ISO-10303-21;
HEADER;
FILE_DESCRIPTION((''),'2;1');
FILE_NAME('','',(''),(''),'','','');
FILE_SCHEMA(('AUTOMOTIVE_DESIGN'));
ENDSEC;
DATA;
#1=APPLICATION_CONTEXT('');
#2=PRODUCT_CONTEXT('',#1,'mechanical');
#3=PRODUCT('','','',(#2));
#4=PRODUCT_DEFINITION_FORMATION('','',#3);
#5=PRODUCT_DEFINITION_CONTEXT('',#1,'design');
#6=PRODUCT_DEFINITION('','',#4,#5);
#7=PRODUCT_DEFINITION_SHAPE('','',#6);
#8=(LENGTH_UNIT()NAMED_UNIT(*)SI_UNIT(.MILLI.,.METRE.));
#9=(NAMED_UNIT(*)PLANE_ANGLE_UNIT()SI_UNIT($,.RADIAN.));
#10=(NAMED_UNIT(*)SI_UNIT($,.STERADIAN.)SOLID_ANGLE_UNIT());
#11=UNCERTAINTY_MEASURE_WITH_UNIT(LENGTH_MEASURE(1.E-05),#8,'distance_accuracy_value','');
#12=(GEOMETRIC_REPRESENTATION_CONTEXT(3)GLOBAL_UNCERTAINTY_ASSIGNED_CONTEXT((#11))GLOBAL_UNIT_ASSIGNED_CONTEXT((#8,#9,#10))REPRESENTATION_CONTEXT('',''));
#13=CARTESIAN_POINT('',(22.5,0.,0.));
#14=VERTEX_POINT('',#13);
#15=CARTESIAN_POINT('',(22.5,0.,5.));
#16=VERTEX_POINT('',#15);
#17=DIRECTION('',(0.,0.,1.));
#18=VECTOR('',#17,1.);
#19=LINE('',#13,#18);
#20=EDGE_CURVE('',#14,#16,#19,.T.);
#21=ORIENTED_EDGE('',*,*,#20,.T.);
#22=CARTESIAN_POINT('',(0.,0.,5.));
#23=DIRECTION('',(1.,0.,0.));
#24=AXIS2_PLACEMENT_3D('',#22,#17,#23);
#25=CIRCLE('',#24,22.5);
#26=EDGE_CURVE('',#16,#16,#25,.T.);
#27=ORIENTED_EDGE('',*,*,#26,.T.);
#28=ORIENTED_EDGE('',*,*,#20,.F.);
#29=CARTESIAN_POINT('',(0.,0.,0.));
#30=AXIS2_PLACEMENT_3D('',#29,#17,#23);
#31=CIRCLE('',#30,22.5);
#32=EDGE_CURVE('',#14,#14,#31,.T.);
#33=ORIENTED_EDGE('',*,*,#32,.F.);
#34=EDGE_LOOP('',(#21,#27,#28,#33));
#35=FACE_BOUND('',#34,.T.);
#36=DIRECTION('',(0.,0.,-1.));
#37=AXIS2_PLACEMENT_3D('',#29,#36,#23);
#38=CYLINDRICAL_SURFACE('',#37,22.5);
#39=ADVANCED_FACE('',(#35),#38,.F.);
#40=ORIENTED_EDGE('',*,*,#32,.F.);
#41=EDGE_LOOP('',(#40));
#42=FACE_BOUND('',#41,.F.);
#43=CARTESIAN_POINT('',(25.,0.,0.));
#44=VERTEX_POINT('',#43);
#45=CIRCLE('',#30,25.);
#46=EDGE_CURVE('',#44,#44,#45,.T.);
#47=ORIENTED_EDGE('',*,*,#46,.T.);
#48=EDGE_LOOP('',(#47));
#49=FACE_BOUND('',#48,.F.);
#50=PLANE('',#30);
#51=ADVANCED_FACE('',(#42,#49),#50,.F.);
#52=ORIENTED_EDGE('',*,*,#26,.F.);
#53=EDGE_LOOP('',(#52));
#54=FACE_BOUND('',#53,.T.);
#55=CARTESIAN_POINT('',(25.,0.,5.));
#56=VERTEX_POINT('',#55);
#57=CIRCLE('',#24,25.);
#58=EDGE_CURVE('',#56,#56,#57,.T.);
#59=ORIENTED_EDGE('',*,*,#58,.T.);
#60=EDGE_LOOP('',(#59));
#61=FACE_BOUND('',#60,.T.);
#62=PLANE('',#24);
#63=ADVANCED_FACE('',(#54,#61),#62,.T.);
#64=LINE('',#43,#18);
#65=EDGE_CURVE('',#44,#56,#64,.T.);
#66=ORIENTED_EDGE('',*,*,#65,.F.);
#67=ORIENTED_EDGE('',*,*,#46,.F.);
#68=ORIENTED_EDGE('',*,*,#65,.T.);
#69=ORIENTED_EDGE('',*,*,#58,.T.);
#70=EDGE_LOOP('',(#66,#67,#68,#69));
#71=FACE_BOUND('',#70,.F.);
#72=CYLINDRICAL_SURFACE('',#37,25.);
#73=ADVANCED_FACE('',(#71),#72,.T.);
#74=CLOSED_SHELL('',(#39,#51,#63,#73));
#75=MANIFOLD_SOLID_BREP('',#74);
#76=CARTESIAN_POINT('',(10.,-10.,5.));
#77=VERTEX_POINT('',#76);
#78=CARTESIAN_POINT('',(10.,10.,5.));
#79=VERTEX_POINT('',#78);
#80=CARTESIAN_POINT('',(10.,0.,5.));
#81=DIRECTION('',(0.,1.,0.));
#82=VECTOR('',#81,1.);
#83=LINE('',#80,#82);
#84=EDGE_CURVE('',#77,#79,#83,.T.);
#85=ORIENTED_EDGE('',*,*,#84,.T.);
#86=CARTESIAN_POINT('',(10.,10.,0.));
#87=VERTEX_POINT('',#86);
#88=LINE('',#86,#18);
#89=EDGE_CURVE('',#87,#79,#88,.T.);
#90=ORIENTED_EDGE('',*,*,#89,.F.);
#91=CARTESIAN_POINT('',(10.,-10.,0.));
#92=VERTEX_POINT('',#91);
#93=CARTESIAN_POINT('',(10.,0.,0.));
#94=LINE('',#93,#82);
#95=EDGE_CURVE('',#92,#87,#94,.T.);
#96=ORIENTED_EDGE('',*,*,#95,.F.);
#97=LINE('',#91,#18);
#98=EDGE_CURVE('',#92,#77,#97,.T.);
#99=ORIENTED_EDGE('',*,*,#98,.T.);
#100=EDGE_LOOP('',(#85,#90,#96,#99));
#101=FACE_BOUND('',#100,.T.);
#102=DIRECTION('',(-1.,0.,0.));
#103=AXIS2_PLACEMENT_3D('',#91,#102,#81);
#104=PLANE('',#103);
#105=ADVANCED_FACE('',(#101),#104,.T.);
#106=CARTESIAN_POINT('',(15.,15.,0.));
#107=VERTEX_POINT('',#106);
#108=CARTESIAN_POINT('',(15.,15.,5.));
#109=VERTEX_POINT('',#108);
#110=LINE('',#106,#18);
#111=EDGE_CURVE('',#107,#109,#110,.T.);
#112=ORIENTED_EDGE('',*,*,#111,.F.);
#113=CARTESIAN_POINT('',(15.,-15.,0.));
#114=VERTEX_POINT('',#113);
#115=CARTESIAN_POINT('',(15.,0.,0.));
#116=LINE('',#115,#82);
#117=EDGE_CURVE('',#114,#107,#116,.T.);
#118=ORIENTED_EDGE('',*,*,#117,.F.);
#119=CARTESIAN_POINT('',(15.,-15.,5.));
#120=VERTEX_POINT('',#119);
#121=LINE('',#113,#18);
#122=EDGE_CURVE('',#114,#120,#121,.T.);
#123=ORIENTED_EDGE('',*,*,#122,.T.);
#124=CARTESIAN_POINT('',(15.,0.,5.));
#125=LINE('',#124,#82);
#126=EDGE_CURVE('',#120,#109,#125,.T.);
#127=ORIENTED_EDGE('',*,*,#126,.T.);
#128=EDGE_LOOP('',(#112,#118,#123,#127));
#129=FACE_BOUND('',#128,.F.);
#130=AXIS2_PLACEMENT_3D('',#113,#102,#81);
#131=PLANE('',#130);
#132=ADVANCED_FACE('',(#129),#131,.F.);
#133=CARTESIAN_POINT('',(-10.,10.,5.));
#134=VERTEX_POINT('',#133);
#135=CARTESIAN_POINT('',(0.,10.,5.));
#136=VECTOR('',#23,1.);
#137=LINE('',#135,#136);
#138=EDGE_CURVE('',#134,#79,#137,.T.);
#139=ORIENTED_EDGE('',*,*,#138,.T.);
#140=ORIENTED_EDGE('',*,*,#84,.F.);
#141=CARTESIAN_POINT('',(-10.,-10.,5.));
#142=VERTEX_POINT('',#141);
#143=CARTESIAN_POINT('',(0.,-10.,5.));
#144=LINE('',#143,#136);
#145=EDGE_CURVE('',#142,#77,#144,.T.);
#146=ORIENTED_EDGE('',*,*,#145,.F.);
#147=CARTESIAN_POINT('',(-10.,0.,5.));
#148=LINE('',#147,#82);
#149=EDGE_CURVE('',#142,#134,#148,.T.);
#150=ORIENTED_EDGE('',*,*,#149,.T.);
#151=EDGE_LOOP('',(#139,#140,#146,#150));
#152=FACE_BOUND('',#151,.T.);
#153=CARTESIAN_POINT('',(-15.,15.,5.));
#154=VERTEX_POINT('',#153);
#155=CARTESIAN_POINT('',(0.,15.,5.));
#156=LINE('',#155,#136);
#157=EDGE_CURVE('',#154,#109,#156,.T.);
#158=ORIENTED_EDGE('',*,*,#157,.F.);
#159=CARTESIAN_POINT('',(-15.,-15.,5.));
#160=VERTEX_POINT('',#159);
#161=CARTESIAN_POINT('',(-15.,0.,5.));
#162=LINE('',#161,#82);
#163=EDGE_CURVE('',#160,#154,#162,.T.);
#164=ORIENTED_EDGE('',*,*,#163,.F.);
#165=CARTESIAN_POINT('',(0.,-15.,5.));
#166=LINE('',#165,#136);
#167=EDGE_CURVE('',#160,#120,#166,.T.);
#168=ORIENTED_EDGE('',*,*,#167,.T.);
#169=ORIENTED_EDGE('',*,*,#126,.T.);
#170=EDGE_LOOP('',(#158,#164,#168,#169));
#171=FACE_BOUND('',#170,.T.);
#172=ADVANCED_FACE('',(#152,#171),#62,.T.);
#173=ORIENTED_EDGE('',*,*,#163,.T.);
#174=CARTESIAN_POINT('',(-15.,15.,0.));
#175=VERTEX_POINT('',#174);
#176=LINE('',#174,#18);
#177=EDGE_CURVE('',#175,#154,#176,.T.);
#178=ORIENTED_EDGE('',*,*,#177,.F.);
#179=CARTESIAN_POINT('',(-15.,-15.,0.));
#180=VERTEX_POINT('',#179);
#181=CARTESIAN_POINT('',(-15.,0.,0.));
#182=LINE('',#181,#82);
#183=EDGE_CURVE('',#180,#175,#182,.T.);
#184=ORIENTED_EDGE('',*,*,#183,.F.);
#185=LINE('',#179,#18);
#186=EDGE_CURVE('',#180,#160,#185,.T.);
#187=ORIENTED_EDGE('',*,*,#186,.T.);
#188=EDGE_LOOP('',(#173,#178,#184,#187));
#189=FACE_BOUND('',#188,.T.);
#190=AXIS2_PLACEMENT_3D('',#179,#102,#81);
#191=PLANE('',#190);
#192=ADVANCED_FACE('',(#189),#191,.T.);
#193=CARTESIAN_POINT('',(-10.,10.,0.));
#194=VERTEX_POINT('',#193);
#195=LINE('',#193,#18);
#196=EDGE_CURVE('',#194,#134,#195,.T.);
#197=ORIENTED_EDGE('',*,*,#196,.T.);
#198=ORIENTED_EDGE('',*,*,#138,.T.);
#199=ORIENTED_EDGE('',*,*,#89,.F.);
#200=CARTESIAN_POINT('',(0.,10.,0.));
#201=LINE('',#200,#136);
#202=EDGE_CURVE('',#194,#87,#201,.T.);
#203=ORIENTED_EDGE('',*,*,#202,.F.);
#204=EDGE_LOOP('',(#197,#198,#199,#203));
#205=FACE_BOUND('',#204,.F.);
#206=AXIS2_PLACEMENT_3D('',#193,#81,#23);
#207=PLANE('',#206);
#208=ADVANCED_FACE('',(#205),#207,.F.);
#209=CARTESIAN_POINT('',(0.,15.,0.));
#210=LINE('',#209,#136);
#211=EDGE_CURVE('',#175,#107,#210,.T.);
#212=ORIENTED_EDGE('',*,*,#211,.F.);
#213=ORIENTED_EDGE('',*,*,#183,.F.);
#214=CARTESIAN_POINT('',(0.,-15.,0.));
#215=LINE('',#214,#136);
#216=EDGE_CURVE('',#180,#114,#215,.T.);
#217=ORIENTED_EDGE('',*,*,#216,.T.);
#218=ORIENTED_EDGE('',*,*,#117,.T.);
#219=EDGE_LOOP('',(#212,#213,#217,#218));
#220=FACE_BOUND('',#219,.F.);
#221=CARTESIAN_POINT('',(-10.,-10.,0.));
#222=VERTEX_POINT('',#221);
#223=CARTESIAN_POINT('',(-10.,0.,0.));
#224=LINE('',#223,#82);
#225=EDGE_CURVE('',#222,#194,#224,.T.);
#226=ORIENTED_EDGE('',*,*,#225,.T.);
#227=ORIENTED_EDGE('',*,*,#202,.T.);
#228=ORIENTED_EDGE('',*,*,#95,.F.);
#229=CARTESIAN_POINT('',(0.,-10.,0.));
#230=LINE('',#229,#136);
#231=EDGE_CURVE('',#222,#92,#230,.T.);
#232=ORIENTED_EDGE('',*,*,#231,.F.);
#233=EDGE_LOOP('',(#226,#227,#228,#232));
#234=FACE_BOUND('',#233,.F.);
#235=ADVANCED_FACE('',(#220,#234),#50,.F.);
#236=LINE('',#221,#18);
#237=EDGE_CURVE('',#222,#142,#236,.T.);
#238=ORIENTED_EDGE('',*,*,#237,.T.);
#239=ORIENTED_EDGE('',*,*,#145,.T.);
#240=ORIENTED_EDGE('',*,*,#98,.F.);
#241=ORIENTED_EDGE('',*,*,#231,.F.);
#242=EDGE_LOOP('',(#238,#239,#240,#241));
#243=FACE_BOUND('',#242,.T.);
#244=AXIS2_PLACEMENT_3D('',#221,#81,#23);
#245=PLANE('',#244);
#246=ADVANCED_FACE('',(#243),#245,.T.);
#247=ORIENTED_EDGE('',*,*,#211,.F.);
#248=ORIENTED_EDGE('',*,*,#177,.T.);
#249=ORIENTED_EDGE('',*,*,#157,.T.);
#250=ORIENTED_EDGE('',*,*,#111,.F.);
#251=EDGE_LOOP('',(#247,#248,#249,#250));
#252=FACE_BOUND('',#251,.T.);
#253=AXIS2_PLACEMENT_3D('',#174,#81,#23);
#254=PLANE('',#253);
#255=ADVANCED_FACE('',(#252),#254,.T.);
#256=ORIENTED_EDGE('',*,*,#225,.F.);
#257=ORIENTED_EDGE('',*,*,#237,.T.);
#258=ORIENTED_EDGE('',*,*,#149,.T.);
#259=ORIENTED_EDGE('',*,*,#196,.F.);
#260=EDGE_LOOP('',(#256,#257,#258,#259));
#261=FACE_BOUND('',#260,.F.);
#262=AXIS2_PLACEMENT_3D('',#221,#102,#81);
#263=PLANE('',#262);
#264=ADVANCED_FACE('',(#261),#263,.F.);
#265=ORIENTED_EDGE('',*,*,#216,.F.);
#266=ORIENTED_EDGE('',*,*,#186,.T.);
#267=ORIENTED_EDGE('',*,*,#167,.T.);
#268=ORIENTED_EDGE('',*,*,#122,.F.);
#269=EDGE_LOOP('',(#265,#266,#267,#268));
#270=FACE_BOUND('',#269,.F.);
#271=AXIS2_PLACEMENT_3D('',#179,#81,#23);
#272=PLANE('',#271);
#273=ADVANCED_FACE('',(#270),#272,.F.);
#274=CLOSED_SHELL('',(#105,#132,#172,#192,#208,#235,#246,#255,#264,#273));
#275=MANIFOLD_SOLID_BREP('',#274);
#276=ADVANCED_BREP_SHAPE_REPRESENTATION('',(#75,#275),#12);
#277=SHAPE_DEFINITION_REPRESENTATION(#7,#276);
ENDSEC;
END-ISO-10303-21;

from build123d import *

# Parameters (mm, degrees)
F0_R     = 25
F0_R_2   = 22.5
F1_DEPTH = 5
F2_W     = 30
F2_H     = 30
F2_W_2   = 20
F2_H_2   = 20
F3_DEPTH = 5


# Not quite as in the source:
# - a feature names something its author has since deleted; it is built from what else it names


with BuildPart() as f1:
    # F0 (on Top) → F1 (new body)
    with BuildSketch(Plane.XY):
        Circle(F0_R)
        Circle(F0_R_2, mode=Mode.SUBTRACT)
    extrude(amount=F1_DEPTH)


with BuildPart() as f3:
    # F2 (on face) → F3 (new body)
    with BuildSketch(Plane.XY):
        Rectangle(F2_W, F2_H)
        Rectangle(F2_W_2, F2_H_2, mode=Mode.SUBTRACT)
    extrude(amount=F3_DEPTH)


solid = Compound([f1.part, f3.part])
